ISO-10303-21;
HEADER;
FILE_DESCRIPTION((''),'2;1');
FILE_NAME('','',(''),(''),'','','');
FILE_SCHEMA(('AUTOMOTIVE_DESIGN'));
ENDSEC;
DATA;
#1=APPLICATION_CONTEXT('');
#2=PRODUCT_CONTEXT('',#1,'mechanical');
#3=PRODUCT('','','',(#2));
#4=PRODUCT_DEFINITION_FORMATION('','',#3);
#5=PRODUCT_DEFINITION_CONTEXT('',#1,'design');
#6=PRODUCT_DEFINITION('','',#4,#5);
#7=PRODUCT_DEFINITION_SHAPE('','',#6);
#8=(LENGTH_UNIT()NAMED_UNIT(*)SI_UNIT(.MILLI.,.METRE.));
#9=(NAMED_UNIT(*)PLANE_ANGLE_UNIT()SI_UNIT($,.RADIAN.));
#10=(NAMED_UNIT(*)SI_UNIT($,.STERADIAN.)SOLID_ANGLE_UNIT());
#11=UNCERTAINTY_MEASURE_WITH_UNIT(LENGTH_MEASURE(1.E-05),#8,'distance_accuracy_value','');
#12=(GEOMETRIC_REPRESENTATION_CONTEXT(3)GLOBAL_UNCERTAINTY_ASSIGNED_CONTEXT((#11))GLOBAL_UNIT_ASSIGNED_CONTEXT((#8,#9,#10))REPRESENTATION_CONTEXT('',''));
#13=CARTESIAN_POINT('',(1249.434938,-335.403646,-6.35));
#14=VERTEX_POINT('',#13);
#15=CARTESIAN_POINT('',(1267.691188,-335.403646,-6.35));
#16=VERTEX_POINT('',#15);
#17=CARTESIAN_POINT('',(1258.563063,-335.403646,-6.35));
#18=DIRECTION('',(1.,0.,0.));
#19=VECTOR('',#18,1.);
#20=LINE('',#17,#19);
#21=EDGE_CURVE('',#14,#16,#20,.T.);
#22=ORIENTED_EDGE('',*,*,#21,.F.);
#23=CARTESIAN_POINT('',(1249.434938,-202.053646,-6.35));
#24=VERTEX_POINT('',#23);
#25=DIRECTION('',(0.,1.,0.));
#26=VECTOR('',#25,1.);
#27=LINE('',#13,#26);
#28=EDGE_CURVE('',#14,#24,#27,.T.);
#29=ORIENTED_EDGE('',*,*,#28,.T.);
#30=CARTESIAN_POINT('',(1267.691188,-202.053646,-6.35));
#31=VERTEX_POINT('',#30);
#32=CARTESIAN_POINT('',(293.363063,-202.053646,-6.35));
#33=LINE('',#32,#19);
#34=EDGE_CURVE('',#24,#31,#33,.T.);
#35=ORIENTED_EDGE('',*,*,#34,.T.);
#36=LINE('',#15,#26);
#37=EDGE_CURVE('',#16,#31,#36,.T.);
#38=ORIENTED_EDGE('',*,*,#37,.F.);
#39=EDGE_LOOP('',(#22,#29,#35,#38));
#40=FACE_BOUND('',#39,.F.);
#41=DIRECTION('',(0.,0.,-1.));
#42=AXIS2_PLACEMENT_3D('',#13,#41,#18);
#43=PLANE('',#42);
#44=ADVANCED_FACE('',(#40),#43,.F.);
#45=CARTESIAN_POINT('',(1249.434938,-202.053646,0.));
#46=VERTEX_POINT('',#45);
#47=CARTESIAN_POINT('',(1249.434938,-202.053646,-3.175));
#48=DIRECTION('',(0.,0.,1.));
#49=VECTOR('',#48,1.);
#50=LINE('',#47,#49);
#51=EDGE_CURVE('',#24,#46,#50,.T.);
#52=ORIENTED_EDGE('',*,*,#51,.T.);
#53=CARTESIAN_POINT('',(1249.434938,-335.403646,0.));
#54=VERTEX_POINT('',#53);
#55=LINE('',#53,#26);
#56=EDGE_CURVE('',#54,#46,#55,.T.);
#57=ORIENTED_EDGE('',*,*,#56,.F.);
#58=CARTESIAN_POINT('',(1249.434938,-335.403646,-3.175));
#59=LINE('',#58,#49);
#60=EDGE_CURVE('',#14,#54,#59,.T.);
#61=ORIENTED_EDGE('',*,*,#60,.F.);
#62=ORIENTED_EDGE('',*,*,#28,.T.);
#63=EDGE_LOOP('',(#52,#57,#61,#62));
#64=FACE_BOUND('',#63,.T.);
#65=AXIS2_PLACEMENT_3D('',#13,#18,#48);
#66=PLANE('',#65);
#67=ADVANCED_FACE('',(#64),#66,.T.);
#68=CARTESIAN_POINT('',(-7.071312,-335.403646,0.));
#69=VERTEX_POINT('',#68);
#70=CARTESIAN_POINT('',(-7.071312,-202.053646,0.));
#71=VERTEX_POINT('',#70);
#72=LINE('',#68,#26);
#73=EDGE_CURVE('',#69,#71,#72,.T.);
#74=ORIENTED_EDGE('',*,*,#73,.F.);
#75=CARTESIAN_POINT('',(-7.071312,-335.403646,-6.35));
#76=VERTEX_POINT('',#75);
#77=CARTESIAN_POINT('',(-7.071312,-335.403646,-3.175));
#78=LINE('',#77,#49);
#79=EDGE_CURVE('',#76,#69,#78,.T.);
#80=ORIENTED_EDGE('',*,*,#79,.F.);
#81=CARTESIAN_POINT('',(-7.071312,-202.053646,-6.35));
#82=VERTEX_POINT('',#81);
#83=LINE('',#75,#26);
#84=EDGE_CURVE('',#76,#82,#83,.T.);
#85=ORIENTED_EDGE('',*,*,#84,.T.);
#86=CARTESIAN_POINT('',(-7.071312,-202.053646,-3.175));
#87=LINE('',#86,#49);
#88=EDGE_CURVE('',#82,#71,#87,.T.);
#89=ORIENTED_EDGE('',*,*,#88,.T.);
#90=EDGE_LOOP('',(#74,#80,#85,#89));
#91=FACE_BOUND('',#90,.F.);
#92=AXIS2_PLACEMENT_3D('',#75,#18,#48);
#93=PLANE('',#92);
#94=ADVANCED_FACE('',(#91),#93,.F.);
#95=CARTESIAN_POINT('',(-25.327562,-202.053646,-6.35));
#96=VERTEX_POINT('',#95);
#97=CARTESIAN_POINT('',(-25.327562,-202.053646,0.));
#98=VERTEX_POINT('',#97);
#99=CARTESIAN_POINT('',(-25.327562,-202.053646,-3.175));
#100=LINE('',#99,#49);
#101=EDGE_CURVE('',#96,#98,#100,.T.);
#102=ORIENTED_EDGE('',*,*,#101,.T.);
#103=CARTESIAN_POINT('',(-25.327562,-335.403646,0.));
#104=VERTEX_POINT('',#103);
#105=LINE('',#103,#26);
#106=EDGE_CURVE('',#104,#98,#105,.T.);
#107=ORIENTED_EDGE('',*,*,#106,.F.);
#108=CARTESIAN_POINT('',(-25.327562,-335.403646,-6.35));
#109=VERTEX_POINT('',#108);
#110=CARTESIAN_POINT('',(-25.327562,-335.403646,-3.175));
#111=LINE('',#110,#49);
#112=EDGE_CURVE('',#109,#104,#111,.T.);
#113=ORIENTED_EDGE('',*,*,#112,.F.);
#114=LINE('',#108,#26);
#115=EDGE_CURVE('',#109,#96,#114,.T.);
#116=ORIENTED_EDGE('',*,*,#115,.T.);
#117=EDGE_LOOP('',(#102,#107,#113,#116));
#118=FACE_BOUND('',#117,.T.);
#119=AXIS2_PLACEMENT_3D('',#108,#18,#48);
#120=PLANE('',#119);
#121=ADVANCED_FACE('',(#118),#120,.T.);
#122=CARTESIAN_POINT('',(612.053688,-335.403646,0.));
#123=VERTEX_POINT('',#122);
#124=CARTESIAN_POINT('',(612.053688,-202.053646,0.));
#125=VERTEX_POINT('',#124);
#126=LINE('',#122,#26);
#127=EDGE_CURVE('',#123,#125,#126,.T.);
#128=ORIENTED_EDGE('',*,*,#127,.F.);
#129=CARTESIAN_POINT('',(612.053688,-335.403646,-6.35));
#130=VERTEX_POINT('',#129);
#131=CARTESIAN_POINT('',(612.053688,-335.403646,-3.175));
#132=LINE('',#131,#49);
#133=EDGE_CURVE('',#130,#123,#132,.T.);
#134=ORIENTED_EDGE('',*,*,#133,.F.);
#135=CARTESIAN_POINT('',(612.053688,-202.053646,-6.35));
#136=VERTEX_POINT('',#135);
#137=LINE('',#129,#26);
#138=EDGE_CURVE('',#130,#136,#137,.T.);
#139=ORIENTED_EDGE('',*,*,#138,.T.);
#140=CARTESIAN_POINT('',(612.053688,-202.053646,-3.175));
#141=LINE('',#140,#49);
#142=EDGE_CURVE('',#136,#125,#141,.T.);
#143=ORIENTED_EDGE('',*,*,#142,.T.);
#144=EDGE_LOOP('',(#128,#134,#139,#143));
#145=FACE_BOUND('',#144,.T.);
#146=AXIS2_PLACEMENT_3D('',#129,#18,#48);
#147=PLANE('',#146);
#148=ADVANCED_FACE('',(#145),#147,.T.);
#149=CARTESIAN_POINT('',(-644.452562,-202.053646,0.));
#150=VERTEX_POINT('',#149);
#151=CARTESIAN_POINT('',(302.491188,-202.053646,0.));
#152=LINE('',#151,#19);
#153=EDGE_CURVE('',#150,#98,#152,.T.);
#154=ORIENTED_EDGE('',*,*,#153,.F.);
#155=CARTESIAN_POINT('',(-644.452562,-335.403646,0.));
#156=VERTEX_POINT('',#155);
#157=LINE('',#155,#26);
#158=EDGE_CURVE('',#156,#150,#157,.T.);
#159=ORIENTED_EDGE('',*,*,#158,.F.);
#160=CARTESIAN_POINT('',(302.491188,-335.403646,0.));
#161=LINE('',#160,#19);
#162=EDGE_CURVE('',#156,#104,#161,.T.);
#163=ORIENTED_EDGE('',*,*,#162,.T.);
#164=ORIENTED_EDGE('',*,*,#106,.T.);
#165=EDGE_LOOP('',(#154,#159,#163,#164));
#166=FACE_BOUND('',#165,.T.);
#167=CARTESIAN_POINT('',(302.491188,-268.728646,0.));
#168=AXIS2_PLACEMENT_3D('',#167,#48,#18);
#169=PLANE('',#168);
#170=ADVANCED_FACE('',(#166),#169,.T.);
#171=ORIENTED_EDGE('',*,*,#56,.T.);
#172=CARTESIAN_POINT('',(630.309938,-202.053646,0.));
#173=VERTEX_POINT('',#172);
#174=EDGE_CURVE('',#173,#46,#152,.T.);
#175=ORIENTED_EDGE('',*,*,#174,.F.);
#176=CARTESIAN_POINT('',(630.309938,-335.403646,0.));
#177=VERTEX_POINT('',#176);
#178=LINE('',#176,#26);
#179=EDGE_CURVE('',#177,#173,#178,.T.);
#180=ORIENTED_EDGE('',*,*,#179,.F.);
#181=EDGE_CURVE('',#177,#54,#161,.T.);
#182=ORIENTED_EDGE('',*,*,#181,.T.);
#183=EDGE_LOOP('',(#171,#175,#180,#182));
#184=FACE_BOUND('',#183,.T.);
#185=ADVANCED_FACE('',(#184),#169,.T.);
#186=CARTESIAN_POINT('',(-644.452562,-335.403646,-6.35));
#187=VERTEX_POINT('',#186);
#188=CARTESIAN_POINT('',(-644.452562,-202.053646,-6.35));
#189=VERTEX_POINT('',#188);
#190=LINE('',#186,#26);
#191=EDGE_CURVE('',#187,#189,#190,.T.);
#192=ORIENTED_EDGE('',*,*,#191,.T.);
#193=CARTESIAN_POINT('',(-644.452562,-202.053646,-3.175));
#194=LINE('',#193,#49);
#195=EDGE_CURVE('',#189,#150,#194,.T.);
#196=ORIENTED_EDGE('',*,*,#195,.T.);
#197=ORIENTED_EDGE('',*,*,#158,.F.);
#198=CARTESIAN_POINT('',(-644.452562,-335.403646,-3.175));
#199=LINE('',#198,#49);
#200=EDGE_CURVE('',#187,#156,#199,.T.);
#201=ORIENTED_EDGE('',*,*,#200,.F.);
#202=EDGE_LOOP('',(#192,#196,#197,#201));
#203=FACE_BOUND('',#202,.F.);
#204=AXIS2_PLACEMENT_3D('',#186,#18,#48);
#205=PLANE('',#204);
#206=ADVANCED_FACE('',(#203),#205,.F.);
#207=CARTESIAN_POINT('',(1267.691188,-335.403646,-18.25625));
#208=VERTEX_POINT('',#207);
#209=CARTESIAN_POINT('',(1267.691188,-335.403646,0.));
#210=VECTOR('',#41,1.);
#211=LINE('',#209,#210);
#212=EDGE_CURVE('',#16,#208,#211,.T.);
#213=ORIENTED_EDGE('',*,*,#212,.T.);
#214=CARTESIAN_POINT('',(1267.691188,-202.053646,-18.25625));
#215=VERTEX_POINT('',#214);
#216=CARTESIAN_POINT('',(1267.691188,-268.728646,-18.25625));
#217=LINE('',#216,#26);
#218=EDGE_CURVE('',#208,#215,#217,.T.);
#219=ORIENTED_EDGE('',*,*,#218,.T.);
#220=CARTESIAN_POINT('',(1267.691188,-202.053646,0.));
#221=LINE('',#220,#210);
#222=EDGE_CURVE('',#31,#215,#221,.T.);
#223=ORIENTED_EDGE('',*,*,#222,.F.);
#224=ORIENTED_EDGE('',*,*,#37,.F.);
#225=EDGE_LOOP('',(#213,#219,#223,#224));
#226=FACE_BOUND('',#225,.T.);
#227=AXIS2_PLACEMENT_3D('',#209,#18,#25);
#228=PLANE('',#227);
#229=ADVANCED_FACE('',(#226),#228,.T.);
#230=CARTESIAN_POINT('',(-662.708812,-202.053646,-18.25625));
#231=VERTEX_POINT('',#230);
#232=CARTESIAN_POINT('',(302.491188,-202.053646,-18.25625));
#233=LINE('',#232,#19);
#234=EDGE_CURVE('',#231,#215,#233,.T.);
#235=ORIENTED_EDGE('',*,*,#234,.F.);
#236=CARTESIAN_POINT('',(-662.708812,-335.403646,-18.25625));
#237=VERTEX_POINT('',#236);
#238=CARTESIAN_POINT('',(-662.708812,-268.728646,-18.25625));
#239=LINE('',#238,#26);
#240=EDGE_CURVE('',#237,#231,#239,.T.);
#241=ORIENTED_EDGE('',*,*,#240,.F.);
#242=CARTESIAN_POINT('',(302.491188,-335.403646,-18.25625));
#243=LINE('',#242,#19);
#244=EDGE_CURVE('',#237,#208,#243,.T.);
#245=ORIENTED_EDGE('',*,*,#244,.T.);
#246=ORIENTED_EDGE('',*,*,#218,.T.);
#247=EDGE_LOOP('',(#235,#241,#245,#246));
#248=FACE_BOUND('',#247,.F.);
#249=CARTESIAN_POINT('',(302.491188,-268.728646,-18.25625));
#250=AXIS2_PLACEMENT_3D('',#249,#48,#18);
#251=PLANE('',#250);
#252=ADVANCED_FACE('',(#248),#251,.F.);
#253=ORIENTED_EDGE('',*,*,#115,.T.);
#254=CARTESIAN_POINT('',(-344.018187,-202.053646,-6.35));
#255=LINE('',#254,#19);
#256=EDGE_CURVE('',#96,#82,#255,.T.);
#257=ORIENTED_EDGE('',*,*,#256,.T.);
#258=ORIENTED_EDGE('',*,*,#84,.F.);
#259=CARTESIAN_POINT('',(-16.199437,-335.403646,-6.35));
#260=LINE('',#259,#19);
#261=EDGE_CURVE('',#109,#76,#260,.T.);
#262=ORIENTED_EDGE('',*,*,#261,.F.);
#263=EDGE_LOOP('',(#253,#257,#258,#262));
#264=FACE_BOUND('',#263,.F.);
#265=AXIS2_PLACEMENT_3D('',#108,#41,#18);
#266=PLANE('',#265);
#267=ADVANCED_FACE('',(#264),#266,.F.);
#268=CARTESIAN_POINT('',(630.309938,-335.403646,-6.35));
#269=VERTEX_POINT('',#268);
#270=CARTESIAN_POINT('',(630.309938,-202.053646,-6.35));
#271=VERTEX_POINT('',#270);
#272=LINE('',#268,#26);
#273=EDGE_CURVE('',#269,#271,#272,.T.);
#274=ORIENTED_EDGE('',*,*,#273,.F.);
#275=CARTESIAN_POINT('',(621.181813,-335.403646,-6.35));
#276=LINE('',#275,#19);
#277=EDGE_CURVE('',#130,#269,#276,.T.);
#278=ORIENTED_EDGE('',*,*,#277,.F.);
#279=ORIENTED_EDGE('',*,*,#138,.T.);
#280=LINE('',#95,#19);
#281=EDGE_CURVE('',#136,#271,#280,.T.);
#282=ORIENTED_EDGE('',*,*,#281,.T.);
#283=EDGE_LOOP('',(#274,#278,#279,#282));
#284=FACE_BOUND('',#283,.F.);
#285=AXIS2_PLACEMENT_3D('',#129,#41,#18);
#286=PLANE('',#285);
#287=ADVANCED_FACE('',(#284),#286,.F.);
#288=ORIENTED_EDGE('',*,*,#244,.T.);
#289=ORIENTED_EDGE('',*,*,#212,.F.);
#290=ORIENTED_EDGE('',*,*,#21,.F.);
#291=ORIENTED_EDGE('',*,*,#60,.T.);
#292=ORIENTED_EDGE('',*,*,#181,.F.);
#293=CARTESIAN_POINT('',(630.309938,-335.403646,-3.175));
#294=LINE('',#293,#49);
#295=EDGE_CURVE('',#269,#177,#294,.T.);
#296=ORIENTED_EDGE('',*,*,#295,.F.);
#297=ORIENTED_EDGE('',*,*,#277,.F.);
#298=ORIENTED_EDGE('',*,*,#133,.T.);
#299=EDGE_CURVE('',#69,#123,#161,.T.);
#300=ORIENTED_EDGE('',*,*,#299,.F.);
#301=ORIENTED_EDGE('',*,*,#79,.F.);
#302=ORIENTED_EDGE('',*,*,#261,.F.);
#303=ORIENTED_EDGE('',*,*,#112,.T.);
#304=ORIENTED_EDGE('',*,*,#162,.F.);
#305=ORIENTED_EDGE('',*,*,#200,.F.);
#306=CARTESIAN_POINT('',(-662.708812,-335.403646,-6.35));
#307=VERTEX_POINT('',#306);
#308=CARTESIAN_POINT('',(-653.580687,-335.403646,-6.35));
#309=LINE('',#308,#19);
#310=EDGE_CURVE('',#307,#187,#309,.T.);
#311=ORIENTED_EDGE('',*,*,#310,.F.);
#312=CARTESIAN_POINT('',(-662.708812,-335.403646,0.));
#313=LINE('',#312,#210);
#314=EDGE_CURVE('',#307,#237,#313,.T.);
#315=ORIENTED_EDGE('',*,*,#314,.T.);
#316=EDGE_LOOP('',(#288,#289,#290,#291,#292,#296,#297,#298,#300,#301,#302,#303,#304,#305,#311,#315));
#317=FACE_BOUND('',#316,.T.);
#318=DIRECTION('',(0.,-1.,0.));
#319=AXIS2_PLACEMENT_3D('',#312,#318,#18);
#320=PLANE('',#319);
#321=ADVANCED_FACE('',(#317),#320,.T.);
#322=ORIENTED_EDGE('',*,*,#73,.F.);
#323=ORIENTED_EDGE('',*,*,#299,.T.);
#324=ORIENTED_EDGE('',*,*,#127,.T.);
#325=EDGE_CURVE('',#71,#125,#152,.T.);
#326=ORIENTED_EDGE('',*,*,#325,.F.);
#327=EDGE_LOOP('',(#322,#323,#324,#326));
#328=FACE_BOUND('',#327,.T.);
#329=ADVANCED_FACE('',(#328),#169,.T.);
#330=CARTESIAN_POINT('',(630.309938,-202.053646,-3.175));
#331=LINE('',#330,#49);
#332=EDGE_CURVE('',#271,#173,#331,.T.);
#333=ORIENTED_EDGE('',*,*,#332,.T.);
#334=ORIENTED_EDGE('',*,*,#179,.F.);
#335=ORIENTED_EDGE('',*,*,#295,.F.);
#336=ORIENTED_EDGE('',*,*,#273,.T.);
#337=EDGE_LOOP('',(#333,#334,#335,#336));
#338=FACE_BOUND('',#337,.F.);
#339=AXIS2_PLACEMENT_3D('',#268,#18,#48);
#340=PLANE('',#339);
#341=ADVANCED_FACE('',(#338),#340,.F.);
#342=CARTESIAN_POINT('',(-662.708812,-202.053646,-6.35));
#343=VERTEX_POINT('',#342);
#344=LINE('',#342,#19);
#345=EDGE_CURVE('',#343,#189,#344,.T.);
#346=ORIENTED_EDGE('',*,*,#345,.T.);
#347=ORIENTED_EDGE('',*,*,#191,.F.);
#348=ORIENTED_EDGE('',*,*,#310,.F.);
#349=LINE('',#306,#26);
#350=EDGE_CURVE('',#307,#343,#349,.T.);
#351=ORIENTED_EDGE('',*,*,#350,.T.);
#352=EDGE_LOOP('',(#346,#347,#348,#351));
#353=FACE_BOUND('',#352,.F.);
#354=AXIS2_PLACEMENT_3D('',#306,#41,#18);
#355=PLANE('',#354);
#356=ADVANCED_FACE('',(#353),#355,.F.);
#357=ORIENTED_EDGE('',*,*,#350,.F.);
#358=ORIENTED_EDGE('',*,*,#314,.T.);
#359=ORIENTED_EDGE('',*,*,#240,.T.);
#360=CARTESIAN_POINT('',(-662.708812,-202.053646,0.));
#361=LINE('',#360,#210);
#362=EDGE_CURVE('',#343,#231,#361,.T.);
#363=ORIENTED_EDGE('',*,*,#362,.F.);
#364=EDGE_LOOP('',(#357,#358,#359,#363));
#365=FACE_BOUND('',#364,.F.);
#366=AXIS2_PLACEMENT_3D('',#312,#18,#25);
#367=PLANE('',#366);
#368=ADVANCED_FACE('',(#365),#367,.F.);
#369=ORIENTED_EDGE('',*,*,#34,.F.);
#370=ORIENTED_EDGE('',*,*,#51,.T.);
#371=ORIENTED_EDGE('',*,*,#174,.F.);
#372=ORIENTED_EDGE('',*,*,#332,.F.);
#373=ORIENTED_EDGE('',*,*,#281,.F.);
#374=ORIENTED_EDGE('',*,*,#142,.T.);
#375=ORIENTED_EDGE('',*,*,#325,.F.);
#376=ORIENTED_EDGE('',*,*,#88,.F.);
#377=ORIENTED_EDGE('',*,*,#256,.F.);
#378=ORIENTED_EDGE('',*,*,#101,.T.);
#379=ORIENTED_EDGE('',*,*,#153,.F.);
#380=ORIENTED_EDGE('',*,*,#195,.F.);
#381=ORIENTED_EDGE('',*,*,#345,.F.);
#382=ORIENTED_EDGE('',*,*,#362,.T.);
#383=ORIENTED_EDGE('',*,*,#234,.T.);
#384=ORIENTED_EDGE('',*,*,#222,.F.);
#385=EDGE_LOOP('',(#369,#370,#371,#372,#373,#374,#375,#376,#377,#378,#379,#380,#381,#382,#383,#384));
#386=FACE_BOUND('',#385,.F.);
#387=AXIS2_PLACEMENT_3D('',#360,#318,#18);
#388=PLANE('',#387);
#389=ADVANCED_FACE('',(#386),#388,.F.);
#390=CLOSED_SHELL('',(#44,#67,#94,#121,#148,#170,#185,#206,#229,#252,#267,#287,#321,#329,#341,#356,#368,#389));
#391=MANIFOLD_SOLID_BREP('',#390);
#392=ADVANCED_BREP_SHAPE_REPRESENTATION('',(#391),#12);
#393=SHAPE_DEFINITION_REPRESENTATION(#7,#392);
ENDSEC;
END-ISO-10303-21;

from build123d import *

# Parameters (mm, degrees)
F0_W     = 1930.4
F0_H     = 133.35
F1_DEPTH = 18.25625
F2_W     = 18.25625
F2_H     = 6.35
F3_DEPTH = 133.351
F4_W     = 18.25625
F4_H     = 6.35
F5_DEPTH = 133.351
F6_W     = 18.25625
F6_H     = 6.35
F7_DEPTH = 133.351
F8_W     = 18.25625
F8_H     = 6.35
F9_DEPTH = 133.351


# Not quite as in the source:
# - a length typed as a fraction of an inch, garbled in the dataset ("3 / 203.2 mm" for 3/8 in), is restored


with BuildPart() as f1:
    # F0 (on Top) → F1 (new body)
    with BuildSketch(Plane.XY):
        with Locations((302.4911884634, -268.7286456764)):
            Rectangle(F0_W, F0_H)
    extrude(amount=-F1_DEPTH)

    # F2 (on face) → F3 (cut, through all)
    with BuildSketch(Plane.XZ.offset(335.4036456764)):
        with Locations((-653.5806865366, -3.175)):
            Rectangle(F2_W, F2_H)
    extrude(amount=-F3_DEPTH, mode=Mode.SUBTRACT)

    # F4 (on face) → F5 (cut, through all)
    with BuildSketch(Plane.XZ.offset(335.4036456764)):
        with Locations((1258.5630634634, -3.175)):
            Rectangle(F4_W, F4_H)
    extrude(amount=-F5_DEPTH, mode=Mode.SUBTRACT)

    # F6 (on face) → F7 (cut, through all)
    with BuildSketch(Plane.XZ.offset(335.4036456764)):
        with Locations((621.1818134634, -3.175)):
            Rectangle(F6_W, F6_H)
    extrude(amount=-F7_DEPTH, mode=Mode.SUBTRACT)

    # F8 (on face) → F9 (cut, through all)
    with BuildSketch(Plane.XZ.offset(335.4036456764)):
        with Locations((-16.1994365366, -3.175)):
            Rectangle(F8_W, F8_H)
    extrude(amount=-F9_DEPTH, mode=Mode.SUBTRACT)


solid = f1.part
